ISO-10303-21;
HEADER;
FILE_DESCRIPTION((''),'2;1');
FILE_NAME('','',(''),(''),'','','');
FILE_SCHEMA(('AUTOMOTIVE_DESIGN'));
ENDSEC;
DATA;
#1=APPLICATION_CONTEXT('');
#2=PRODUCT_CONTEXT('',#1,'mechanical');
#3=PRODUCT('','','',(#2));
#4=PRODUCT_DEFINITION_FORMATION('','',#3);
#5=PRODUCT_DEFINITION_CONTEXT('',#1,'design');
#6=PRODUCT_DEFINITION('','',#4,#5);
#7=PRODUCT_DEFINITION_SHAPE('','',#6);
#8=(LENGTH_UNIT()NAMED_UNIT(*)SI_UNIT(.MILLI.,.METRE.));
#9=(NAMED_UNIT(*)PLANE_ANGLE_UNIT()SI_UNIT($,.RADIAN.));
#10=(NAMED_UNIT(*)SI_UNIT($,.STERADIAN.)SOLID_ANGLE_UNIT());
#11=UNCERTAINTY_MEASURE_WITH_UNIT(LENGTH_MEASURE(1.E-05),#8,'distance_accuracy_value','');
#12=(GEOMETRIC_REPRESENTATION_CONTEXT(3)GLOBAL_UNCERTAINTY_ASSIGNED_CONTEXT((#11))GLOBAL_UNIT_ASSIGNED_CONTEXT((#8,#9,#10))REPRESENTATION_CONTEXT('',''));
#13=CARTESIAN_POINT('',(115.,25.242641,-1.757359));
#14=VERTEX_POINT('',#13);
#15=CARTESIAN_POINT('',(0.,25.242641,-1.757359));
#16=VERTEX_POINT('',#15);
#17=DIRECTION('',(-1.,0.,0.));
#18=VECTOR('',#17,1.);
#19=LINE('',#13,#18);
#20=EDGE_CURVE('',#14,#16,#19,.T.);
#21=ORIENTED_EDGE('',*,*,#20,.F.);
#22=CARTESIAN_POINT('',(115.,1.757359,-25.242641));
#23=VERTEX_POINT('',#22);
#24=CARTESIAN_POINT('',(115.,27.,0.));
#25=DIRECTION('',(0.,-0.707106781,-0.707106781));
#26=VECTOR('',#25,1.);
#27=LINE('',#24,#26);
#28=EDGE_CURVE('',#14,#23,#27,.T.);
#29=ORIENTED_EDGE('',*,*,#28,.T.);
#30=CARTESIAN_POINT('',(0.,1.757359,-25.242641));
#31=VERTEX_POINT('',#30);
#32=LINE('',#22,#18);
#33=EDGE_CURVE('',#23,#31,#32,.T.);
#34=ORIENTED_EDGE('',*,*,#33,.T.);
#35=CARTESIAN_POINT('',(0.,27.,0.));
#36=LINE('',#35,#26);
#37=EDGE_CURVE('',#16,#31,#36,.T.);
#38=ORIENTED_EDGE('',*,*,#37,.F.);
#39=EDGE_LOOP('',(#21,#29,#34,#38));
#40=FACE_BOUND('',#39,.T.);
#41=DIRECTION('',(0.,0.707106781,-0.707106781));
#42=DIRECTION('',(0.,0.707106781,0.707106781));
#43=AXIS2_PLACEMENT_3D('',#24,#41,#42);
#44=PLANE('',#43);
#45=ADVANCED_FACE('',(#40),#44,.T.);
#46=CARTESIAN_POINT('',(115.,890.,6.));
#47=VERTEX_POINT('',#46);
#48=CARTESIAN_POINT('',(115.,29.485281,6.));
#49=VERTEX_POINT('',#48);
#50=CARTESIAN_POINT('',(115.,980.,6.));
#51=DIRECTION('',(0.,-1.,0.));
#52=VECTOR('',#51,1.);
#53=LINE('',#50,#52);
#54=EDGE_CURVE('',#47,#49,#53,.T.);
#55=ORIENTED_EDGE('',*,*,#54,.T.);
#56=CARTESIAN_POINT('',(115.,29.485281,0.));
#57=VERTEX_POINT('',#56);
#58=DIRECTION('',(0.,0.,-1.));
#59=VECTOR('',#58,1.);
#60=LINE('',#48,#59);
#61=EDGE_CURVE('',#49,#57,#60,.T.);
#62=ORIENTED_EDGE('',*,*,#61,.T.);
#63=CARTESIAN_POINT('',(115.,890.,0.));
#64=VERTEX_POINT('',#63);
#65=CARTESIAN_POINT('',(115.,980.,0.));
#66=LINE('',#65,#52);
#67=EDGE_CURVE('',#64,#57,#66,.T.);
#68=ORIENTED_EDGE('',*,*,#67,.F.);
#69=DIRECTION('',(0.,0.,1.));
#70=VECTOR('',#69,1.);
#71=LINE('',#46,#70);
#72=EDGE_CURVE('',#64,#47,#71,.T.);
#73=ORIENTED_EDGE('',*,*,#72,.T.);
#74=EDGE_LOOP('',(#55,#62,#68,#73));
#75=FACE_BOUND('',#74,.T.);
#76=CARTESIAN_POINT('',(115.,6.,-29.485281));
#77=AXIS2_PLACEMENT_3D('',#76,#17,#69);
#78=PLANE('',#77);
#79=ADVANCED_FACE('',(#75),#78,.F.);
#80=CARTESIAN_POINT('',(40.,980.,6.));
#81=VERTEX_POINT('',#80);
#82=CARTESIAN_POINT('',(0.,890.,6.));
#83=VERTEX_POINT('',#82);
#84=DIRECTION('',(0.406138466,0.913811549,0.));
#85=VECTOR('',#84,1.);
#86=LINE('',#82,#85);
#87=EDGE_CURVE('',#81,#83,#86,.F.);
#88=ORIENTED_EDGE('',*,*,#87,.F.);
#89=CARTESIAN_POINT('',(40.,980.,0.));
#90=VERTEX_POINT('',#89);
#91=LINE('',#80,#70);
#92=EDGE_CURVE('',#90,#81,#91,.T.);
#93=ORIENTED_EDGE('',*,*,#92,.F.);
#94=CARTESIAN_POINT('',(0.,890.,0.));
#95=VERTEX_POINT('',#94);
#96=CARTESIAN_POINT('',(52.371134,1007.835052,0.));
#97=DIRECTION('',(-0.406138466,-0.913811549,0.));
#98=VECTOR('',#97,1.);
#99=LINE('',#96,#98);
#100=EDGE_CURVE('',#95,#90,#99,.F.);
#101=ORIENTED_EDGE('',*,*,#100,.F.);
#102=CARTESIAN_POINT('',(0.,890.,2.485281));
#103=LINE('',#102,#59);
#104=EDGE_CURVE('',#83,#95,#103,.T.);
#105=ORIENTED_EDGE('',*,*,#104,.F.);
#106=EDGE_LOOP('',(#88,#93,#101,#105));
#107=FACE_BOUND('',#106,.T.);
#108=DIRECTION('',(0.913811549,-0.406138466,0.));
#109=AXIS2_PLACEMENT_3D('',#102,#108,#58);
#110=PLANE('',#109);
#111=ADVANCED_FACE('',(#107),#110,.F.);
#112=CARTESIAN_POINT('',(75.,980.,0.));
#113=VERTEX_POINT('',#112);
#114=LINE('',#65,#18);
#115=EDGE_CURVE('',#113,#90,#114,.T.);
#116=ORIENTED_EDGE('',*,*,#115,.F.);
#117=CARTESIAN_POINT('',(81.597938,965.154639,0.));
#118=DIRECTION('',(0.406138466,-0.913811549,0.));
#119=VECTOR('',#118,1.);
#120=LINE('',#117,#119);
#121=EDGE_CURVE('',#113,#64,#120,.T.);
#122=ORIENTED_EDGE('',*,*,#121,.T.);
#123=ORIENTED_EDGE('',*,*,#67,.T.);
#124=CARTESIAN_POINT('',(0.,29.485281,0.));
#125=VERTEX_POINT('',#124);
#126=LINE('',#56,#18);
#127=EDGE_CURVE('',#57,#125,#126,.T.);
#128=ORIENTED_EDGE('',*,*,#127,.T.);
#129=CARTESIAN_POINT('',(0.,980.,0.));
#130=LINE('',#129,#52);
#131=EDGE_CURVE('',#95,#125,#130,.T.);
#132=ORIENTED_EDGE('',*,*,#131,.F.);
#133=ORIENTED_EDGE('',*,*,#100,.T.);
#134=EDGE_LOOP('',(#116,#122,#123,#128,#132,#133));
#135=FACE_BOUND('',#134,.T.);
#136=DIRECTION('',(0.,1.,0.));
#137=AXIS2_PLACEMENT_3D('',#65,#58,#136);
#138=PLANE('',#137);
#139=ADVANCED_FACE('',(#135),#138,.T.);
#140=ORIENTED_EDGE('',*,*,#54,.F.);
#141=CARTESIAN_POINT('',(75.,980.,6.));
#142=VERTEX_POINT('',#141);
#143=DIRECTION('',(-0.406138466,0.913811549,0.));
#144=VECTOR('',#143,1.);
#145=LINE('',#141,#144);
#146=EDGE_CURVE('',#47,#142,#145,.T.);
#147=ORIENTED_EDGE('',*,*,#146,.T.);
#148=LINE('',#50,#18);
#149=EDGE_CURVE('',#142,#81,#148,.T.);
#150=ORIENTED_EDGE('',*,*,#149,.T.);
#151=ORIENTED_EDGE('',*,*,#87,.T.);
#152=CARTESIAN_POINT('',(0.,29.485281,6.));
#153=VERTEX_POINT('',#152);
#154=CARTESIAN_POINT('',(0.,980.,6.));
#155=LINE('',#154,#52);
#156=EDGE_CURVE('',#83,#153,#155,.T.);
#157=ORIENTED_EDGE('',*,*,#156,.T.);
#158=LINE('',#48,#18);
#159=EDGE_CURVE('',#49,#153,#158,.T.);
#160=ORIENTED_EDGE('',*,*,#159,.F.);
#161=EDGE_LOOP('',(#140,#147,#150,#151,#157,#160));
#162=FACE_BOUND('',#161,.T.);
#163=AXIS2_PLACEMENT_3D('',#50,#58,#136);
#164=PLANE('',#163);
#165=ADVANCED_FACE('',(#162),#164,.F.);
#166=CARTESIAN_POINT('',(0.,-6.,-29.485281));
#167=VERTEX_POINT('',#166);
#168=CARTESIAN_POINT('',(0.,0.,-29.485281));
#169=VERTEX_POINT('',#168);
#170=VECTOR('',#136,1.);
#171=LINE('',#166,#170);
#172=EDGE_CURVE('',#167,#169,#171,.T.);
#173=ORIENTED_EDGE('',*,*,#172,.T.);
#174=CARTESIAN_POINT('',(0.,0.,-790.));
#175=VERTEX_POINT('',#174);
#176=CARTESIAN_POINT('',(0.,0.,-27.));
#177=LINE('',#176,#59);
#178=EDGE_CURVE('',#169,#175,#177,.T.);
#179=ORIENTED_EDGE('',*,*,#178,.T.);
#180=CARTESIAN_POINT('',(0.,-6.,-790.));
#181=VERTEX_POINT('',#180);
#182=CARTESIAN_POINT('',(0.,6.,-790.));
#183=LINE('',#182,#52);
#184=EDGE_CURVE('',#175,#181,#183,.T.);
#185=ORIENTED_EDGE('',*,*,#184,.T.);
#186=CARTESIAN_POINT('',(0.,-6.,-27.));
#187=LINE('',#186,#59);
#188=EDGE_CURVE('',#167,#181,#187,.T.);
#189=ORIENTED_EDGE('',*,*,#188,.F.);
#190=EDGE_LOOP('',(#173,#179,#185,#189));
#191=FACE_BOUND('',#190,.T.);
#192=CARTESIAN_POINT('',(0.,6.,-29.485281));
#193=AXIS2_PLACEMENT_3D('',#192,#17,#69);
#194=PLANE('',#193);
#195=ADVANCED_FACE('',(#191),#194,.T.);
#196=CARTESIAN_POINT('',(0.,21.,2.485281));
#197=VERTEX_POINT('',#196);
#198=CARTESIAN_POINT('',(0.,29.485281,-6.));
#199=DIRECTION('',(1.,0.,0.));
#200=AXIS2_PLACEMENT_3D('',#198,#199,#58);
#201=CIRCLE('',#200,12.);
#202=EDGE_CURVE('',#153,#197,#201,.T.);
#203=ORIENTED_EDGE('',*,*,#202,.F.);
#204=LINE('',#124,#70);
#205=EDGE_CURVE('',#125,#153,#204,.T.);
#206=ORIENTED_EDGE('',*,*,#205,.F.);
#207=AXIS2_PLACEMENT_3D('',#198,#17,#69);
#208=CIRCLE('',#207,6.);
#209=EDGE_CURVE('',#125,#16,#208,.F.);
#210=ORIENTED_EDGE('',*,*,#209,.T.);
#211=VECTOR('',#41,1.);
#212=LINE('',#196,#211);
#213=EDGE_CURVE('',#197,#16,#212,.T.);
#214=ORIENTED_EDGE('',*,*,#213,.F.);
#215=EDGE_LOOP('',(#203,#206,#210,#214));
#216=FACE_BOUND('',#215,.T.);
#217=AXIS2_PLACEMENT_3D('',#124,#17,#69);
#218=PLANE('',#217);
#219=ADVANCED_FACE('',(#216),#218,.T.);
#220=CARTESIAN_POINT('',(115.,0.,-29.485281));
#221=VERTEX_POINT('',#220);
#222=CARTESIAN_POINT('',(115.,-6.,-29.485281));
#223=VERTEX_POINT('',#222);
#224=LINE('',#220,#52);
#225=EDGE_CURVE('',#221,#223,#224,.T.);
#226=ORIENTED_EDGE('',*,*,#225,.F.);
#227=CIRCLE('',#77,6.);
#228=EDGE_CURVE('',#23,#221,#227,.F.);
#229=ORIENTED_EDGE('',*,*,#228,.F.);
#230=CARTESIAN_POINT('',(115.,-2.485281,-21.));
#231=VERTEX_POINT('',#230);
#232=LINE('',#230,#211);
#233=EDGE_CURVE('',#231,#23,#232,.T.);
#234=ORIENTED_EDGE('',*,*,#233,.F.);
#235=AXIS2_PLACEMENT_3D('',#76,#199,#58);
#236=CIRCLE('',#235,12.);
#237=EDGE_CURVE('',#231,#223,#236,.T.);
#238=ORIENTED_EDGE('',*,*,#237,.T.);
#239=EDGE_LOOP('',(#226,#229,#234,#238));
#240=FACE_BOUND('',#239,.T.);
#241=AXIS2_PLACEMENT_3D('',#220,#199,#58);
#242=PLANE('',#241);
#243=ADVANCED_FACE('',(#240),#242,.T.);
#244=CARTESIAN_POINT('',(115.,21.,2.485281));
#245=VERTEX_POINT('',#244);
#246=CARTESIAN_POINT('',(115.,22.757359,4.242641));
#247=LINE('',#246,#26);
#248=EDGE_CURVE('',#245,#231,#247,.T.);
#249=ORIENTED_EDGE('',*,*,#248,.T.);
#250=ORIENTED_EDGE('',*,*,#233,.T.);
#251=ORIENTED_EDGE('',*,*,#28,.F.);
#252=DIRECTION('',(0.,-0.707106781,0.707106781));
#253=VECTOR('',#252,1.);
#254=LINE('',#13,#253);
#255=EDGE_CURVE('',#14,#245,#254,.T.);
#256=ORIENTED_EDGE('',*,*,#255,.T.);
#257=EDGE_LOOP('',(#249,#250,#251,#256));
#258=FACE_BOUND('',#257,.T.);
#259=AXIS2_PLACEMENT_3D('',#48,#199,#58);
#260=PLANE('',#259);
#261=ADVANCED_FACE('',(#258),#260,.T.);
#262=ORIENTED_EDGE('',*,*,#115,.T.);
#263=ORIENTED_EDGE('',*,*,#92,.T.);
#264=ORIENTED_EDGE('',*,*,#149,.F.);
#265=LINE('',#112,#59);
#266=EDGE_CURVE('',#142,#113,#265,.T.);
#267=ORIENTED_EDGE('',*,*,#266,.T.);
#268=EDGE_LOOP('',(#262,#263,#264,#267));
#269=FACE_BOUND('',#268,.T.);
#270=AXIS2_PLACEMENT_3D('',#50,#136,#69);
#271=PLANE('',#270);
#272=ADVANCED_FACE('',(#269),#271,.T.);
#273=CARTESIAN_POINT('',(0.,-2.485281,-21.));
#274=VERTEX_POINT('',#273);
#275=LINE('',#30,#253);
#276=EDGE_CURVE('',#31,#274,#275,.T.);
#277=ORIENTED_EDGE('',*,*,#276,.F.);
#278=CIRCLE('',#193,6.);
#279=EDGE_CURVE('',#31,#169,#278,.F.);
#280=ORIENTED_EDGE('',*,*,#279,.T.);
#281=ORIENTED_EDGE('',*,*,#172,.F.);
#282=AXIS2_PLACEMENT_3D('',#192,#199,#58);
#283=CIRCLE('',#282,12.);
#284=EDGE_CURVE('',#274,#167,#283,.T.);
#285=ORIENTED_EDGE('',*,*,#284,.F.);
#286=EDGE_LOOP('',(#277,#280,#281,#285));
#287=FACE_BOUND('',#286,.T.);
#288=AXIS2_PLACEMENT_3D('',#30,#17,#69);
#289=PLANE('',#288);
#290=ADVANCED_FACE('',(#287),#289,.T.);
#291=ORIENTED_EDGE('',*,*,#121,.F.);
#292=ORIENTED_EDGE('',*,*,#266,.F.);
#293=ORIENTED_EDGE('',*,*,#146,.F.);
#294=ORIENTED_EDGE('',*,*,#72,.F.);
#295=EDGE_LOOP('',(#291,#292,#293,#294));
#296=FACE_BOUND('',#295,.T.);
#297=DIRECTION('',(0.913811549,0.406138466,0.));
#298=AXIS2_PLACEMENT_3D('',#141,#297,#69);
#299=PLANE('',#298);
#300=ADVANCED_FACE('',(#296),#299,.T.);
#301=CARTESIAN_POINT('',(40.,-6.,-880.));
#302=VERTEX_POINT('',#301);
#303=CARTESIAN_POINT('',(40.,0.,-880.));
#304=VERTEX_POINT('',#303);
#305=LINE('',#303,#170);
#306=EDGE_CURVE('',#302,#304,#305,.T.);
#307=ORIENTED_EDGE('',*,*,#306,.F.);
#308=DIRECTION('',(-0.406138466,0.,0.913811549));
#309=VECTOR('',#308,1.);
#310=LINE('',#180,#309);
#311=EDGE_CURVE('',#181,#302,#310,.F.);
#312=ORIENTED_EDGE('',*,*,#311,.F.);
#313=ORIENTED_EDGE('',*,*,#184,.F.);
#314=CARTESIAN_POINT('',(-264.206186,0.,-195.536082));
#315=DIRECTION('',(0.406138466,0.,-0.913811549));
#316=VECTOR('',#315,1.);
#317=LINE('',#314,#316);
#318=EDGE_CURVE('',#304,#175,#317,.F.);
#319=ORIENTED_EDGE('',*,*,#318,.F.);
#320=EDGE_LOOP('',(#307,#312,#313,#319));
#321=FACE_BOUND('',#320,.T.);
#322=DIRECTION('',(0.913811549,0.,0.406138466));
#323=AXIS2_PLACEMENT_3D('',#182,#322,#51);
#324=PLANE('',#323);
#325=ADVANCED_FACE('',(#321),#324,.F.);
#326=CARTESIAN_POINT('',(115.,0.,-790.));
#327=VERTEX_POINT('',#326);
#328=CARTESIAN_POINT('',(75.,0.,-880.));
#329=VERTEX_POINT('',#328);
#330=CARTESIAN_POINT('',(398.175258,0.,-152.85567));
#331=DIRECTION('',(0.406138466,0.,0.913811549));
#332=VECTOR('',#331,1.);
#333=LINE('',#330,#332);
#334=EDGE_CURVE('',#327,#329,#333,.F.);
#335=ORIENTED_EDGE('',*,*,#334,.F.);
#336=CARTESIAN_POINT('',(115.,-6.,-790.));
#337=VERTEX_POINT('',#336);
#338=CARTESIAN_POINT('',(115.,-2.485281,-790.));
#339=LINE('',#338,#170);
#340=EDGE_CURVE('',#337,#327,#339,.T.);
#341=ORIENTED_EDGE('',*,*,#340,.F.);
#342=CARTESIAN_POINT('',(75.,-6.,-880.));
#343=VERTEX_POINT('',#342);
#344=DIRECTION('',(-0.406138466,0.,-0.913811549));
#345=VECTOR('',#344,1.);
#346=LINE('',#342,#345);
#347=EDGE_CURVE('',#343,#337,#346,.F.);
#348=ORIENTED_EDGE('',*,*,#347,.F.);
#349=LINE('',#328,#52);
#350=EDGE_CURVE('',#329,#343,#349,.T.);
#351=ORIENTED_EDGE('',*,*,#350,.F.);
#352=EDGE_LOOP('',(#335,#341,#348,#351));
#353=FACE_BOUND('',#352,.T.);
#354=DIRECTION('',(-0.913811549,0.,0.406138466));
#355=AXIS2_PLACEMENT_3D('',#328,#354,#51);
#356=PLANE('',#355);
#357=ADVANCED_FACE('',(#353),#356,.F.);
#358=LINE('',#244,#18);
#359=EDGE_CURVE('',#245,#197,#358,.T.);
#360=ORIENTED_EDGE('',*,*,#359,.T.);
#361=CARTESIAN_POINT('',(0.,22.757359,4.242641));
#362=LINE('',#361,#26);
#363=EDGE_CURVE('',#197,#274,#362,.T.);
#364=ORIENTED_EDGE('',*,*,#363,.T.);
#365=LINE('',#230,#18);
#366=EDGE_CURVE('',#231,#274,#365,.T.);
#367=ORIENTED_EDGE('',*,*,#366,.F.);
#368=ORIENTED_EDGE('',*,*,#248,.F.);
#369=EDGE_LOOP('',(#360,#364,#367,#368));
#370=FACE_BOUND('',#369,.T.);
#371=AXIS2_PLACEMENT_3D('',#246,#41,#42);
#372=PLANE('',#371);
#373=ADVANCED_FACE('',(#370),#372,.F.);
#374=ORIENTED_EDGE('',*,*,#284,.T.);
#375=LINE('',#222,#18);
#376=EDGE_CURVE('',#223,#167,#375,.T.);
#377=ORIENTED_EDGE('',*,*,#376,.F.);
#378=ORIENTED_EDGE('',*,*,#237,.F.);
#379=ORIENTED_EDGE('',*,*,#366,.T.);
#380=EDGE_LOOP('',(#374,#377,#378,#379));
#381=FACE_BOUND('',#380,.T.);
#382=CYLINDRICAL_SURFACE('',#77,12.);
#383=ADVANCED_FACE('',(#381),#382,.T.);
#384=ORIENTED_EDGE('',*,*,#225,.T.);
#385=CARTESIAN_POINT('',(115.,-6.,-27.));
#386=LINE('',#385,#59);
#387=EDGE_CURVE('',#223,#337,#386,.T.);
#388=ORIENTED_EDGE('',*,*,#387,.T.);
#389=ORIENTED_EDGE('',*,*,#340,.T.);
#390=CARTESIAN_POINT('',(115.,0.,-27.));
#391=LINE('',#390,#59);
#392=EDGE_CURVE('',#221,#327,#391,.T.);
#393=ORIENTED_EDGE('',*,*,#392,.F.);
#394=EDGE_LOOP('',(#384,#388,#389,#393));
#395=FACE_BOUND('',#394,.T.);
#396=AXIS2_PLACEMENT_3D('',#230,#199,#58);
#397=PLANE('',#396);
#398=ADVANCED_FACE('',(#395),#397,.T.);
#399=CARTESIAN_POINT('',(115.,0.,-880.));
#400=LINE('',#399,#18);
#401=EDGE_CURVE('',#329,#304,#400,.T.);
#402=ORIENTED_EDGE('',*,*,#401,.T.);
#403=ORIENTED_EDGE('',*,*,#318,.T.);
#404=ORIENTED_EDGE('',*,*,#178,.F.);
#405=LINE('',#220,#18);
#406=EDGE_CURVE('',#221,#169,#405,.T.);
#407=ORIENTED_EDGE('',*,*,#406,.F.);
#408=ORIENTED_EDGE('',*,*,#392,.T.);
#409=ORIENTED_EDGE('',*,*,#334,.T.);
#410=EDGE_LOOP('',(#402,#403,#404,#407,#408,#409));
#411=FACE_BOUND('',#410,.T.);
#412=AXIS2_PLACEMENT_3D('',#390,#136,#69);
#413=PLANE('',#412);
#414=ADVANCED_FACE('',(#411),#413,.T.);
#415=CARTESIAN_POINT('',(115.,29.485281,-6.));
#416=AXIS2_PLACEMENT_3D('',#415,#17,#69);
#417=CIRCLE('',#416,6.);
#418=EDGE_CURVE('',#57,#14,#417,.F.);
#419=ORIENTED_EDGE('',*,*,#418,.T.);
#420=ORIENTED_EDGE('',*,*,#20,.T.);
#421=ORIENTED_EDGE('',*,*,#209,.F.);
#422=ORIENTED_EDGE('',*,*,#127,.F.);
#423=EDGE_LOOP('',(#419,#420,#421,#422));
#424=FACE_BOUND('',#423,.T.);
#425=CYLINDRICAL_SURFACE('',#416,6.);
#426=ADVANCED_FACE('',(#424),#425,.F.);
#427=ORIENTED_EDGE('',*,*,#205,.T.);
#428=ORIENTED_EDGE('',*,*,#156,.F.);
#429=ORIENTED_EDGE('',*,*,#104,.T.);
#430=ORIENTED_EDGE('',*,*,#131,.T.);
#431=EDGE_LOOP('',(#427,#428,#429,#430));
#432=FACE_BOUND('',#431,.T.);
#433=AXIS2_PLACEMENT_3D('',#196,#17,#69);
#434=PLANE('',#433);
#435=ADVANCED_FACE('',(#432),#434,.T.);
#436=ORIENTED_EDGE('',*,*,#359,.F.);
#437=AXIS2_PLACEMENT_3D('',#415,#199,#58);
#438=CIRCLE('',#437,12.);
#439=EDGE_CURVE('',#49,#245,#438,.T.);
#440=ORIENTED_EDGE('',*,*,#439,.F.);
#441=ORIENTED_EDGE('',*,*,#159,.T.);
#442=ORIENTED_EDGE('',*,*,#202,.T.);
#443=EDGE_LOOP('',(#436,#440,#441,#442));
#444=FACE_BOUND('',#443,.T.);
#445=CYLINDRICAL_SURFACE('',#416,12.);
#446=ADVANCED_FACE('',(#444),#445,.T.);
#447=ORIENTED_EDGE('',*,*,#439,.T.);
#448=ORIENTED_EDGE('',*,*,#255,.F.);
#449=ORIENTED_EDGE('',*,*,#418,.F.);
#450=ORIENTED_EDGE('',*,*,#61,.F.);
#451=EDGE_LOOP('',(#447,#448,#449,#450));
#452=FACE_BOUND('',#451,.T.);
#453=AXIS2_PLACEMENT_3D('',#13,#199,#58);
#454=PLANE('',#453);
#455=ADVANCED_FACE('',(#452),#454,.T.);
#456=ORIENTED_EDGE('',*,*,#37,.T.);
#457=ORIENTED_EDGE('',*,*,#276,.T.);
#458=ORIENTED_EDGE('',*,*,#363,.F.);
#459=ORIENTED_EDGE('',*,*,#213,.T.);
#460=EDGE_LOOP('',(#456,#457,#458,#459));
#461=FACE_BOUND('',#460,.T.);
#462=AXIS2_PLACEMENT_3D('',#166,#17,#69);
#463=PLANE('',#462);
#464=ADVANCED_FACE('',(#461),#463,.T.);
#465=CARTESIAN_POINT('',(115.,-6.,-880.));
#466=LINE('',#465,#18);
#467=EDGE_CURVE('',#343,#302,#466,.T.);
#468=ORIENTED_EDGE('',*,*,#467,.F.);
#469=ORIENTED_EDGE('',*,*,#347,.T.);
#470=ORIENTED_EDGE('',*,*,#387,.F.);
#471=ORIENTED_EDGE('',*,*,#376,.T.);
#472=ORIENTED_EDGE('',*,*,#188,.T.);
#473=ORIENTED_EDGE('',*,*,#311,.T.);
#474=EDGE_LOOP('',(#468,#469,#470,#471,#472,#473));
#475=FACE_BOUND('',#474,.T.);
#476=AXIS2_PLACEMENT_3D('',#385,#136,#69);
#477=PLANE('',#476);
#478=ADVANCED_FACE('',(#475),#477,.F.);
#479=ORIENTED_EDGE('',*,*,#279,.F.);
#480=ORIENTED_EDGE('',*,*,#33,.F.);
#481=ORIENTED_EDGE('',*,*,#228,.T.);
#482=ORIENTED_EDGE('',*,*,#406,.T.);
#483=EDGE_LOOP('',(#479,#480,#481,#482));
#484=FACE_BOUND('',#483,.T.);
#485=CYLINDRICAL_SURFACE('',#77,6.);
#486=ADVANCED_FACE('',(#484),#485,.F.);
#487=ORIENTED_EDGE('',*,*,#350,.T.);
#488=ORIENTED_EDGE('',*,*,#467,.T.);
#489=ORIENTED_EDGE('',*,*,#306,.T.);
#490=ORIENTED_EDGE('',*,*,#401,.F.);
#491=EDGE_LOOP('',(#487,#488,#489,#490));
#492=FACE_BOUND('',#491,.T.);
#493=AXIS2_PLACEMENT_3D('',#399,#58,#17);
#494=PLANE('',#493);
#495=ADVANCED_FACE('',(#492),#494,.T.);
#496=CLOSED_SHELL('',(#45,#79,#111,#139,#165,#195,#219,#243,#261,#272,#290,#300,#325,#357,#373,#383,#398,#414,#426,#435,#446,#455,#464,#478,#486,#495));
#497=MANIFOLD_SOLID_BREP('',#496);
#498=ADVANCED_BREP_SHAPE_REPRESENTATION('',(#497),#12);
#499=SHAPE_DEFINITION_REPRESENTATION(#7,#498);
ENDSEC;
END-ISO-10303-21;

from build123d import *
from OCP.BRepFilletAPI import BRepFilletAPI_MakeChamfer

# Parameters (mm, degrees)
SM_BASE_FLANGE_1_DEPTH = 115
CHAMFER_1_SIZE         = 90
CHAMFER_1_SIZE2        = 40
CHAMFER_2_SIZE         = 40
CHAMFER_2_SIZE2        = 90


# Sheet-metal steps are written as plain solids
with BuildPart() as part:
    # Sketch 1 → 基体-法兰1 (new body)
    with BuildSketch(Plane(origin=(0, 0, 0), x_dir=(0, 0, -1), z_dir=(1, 0, 0))):
        with BuildLine():
            Line((0, 980), (0, 29.485281374))
            ThreePointArc((0, 29.485281374), (0.456722805, 27.18918078), (1.757359313, 25.242640687))
            Line((1.757359313, 25.242640687), (25.242640687, 1.757359313))
            ThreePointArc((25.242640687, 1.757359313), (27.18918078, 0.456722805), (29.485281374, 0))
            Line((29.485281374, 0), (880, 0))
            Line((880, 0), (880, -6))
            Line((880, -6), (29.485281374, -6))
            ThreePointArc((29.485281374, -6), (24.893080186, -5.08655439), (21, -2.485281374))
            Line((21, -2.485281374), (-2.485281374, 21))
            ThreePointArc((-2.485281374, 21), (-5.08655439, 24.893080186), (-6, 29.485281374))
            Line((-6, 29.485281374), (-6, 980))
            Line((-6, 980), (0, 980))
        make_face()
    extrude(amount=SM_BASE_FLANGE_1_DEPTH)

    # 倒角1
    chamfer_1_edges = [part.edges().sort_by_distance(p)[0] for p in [
        (115, 980, 3),
        (115, -3, -880),
    ]]
    chamfer_1_side = [part.faces().sort_by_distance(p)[0] for p in [
        (115, 25.400361972, 3.861867822),
    ]]
    chamfer(chamfer_1_edges, length=CHAMFER_1_SIZE, length2=CHAMFER_1_SIZE2, reference=chamfer_1_side[0])

    # 倒角2: one chamfer whose edges measure the first distance from different faces: ONE call of the kernel's chamfer builder (chamfer() names one face for all edges)
    chamfer_2_edges_1 = [part.edges().sort_by_distance(p)[0] for p in [
        (0, 980, 3),
    ]]
    chamfer_2_side_1 = [part.faces().sort_by_distance(p)[0] for p in [
        (37.5, 980, 3),
    ]]
    chamfer_2_edges_2 = [part.edges().sort_by_distance(p)[0] for p in [
        (0, -3, -880),
    ]]
    chamfer_2_side_2 = [part.faces().sort_by_distance(p)[0] for p in [
        (37.5, -3, -880),
    ]]
    chamfer_2 = BRepFilletAPI_MakeChamfer(part.part.solid().wrapped)
    for e in chamfer_2_edges_1:
        chamfer_2.Add(CHAMFER_2_SIZE, CHAMFER_2_SIZE2, e.wrapped, chamfer_2_side_1[0].wrapped)  # the first distance lies on this face
    for e in chamfer_2_edges_2:
        chamfer_2.Add(CHAMFER_2_SIZE, CHAMFER_2_SIZE2, e.wrapped, chamfer_2_side_2[0].wrapped)  # the first distance lies on this face
    add(Compound.cast(chamfer_2.Shape()), mode=Mode.REPLACE)


solid = part.part
